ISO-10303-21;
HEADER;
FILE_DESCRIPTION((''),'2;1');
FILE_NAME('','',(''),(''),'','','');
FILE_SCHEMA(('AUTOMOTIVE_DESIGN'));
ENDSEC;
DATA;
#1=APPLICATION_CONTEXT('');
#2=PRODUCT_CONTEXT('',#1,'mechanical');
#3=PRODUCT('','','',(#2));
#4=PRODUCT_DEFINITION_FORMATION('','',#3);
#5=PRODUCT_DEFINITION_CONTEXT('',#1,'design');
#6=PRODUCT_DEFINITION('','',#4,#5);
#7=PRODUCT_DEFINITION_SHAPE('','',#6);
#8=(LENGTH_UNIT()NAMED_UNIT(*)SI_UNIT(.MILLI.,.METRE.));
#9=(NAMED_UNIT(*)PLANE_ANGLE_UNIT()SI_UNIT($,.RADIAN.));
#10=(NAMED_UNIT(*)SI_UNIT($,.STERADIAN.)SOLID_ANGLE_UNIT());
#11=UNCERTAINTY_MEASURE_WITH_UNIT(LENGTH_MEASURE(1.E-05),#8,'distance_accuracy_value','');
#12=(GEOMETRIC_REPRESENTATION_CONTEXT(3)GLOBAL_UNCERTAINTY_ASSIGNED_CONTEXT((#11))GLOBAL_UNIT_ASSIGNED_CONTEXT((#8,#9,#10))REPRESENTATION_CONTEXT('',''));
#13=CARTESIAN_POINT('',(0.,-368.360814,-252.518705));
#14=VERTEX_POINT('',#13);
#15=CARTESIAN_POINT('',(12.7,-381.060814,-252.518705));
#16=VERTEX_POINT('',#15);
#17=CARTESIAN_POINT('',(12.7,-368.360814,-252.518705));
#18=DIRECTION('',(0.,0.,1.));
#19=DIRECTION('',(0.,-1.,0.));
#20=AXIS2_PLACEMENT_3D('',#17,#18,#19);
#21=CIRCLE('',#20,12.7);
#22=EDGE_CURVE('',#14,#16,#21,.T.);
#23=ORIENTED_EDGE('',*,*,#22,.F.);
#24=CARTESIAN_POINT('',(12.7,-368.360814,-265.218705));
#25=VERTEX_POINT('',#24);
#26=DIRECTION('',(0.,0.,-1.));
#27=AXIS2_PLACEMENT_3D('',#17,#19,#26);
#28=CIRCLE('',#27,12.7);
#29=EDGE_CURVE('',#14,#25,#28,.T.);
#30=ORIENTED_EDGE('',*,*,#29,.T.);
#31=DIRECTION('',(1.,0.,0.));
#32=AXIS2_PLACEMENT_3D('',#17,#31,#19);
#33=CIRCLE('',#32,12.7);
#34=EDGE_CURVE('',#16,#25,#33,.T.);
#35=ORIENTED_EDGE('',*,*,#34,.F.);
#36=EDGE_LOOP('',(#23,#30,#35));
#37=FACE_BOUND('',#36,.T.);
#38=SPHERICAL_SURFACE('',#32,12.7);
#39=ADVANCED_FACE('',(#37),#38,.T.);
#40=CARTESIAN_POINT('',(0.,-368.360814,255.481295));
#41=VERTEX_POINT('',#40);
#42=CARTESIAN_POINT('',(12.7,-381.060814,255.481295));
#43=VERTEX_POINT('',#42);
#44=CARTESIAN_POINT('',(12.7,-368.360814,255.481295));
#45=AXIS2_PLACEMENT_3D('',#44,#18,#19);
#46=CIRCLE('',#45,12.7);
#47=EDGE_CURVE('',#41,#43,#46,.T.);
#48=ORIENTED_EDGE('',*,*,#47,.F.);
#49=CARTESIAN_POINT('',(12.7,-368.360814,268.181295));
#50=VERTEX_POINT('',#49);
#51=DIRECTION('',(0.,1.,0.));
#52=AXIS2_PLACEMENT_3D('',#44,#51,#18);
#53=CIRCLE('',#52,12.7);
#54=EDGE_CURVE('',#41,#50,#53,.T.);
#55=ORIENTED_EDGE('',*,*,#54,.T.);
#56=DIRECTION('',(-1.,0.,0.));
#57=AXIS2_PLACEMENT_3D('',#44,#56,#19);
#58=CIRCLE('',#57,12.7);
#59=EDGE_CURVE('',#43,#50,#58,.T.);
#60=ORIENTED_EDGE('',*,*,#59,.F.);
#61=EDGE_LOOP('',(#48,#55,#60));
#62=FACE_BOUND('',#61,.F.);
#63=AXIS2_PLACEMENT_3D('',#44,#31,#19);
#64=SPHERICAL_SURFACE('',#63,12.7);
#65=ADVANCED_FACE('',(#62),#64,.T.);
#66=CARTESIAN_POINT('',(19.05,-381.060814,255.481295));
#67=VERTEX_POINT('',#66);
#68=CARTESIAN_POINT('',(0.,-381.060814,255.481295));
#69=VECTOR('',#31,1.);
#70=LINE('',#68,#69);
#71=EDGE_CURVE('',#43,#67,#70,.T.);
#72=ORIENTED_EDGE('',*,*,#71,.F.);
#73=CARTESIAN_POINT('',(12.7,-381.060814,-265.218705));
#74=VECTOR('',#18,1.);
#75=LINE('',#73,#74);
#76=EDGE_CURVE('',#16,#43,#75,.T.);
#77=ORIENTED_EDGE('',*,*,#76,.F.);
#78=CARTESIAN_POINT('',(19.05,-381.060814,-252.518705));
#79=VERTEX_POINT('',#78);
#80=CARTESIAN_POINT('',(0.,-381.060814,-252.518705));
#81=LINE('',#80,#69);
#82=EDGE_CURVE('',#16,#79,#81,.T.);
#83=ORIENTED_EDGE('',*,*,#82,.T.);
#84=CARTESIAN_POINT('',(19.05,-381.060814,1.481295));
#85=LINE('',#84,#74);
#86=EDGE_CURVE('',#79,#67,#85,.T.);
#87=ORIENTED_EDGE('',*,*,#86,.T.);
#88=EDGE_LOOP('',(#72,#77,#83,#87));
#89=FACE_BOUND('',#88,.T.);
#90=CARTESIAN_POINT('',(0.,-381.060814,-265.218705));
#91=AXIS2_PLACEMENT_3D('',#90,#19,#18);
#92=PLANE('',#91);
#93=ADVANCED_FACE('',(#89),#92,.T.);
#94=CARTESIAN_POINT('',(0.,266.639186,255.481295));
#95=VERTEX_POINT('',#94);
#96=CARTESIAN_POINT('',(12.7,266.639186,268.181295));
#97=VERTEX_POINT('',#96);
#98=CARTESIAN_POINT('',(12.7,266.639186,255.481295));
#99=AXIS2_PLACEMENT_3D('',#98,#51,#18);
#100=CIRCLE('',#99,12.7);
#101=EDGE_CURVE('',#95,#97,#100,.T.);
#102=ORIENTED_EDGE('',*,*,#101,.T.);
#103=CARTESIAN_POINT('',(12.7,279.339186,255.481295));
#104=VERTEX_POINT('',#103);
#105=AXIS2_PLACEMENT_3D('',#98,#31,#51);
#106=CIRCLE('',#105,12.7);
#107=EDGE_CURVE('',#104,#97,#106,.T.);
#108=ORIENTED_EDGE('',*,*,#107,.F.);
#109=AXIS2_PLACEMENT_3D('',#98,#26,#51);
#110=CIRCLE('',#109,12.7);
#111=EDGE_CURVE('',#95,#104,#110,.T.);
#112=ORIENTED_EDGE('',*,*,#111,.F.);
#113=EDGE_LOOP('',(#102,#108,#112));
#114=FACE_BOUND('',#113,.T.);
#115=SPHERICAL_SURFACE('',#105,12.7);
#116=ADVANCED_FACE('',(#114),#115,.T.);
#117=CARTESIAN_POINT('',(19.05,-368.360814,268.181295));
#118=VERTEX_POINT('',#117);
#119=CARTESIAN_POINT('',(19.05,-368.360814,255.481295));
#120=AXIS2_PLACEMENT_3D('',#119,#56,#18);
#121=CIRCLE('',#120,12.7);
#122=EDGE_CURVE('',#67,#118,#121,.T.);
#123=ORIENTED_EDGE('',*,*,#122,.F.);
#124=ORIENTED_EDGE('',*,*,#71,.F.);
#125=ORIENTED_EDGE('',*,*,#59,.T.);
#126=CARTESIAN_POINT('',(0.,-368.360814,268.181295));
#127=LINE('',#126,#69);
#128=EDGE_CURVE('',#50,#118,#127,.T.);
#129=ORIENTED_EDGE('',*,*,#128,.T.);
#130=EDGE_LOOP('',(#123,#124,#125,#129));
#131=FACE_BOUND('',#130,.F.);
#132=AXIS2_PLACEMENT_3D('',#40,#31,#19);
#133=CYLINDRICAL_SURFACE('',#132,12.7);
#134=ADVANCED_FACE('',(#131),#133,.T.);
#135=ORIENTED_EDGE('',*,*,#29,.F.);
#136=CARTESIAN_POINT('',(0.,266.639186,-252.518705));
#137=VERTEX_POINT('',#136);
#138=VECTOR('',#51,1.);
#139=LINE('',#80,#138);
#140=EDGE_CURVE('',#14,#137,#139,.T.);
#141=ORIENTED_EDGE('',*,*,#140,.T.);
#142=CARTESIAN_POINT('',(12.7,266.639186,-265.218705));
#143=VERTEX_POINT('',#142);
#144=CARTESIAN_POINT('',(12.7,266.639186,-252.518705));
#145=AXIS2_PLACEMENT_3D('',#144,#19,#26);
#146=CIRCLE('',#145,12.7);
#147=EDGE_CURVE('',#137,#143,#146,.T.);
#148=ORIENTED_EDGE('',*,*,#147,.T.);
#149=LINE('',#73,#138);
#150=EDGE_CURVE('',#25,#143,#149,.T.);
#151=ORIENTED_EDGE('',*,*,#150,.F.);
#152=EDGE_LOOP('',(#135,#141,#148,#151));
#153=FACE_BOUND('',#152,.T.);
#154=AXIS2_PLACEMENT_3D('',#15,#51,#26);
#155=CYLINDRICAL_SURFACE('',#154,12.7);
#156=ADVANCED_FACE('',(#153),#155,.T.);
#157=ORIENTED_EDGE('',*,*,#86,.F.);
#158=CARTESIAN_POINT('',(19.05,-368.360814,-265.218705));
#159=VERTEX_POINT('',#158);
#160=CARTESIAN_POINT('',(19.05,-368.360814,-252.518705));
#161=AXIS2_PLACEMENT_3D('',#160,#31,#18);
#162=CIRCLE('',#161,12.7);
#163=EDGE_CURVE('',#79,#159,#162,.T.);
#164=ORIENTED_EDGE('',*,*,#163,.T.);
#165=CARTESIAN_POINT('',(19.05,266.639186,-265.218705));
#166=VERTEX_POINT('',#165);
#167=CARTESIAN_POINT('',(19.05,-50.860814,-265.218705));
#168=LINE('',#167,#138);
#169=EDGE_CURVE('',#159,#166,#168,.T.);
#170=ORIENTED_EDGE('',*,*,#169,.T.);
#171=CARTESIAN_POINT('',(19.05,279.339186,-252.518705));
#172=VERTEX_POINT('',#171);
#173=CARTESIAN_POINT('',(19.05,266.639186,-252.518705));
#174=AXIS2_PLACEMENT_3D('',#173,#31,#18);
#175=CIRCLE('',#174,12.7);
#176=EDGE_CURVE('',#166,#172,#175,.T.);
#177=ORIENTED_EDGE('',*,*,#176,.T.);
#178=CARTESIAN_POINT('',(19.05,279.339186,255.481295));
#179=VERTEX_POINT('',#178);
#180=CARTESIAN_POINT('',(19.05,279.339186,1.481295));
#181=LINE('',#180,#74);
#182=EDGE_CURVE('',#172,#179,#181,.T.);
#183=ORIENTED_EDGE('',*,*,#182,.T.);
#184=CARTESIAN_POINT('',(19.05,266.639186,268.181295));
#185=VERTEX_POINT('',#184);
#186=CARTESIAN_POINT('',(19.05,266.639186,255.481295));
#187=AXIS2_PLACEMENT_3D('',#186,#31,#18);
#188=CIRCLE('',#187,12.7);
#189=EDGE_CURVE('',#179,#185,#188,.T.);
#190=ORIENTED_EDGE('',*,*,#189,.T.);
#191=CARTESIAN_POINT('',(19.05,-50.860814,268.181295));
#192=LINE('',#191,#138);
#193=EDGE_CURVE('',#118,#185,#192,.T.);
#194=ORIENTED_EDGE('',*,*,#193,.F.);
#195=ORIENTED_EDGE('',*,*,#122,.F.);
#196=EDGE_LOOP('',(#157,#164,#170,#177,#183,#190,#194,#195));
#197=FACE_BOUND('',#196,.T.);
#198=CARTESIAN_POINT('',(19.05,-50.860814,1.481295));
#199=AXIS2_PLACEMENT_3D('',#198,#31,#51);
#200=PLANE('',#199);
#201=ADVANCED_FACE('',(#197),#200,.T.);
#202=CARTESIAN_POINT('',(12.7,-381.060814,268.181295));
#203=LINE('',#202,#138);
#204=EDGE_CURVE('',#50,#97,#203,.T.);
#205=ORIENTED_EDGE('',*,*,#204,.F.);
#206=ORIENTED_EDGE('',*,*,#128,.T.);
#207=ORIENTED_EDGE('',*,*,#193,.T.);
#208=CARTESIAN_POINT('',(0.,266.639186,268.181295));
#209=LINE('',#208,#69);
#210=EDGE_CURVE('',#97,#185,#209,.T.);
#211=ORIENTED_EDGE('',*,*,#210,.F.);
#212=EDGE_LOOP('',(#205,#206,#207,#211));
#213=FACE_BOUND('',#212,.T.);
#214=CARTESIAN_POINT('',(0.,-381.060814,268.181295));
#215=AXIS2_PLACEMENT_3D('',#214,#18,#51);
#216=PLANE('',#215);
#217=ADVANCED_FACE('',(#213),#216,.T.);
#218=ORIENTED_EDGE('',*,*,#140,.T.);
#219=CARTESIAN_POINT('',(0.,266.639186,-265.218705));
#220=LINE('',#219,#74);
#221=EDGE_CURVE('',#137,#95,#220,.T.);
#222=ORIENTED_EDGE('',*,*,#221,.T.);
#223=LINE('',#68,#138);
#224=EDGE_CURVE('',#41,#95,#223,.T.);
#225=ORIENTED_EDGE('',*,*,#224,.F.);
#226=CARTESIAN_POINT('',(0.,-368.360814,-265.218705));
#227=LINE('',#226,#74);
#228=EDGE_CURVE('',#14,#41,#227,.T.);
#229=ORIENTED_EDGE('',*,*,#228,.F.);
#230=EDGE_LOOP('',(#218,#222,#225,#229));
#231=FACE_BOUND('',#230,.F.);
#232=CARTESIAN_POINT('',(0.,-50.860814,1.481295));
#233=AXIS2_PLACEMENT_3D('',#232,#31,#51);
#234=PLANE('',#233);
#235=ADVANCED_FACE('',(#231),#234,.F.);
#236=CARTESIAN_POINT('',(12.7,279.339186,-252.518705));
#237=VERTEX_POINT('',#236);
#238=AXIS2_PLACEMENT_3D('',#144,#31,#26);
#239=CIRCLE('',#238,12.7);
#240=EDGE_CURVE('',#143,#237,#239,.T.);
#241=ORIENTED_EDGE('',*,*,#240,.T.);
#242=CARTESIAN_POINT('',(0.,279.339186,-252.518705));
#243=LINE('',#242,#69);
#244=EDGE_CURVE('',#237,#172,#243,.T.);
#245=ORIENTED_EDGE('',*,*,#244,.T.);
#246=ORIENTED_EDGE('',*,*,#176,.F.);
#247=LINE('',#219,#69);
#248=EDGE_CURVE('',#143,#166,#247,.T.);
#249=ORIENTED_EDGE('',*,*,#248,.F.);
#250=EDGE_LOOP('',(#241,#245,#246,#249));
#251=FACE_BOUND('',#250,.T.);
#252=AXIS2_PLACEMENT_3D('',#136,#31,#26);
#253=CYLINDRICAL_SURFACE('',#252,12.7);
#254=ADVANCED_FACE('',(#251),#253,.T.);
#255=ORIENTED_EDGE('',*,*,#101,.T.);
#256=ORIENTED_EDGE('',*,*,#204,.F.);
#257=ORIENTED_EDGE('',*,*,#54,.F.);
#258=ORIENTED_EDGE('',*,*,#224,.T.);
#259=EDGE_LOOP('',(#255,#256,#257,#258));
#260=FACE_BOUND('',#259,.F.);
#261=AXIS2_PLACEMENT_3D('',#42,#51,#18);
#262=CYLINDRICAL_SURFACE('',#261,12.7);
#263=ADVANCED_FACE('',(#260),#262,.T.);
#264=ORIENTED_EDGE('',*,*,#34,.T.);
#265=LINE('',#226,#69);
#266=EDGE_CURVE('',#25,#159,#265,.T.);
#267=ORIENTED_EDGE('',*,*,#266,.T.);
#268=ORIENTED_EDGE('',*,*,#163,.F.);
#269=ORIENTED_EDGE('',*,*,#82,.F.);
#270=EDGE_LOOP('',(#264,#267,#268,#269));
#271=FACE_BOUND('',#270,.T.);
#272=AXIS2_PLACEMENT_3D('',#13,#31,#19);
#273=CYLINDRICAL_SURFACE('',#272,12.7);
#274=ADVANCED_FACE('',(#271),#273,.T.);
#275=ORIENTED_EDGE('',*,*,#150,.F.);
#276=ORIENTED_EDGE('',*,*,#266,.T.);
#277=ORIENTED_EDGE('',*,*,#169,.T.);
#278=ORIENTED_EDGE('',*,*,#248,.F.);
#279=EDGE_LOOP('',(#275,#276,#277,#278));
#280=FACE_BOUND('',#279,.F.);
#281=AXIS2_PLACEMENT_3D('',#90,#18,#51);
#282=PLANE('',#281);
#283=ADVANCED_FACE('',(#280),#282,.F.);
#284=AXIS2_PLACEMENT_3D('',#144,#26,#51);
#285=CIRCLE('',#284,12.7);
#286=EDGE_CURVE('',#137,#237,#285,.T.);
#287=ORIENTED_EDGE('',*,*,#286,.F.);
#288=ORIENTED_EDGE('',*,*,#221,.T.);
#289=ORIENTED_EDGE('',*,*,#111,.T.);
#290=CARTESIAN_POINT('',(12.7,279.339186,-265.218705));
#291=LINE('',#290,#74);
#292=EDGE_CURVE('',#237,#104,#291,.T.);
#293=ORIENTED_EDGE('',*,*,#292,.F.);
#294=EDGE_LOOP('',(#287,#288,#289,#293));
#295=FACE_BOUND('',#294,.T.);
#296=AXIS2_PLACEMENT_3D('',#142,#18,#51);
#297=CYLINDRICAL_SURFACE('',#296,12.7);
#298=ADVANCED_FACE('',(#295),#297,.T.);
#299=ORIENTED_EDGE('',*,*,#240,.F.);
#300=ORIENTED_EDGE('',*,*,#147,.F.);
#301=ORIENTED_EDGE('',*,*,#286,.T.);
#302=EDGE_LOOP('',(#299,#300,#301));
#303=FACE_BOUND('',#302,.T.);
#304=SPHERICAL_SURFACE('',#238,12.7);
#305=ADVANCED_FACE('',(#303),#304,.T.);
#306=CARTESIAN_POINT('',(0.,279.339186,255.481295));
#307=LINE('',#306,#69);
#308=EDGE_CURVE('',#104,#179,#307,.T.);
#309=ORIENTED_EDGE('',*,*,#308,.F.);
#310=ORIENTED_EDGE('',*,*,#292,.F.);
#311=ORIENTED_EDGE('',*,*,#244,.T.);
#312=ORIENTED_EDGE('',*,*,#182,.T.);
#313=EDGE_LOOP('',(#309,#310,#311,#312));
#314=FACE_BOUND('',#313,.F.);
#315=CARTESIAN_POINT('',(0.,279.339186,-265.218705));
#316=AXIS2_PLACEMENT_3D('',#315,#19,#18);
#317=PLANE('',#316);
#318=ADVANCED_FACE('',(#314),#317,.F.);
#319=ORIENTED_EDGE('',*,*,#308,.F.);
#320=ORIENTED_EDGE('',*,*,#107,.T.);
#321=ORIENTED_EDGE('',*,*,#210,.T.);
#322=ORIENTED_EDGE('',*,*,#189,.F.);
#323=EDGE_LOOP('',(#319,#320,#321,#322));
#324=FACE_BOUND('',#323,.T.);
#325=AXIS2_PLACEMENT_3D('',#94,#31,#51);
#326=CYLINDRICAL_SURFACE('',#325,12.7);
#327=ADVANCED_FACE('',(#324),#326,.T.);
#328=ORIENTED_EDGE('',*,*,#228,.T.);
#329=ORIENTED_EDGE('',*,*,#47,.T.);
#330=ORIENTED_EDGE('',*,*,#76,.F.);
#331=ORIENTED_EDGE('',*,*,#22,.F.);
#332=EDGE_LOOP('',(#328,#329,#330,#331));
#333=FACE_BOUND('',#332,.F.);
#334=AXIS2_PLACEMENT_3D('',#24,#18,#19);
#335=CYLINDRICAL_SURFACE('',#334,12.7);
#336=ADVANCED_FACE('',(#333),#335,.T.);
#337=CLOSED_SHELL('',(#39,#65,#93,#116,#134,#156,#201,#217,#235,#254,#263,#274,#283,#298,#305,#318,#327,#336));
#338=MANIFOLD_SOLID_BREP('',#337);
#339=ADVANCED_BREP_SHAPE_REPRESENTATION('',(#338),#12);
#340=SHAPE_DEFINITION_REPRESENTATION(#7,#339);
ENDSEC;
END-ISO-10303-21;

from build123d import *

# Parameters (mm, degrees)
F0_W     = 660.4
F0_H     = 533.4
F1_DEPTH = 19.05
F3_R     = 12.7


# Not quite as in the source:
# - two fillets or chamfers of one size are made in one step
# - a feature of the source that left no trace in its solid (it failed there, or was rolled back) is left out


with BuildPart() as f1:
    # F0 (on Right) → F1 (new body)
    with BuildSketch(Plane.YZ):
        with Locations((-50.8608140139, 1.481294632)):
            Rectangle(F0_W, F0_H)
    extrude(amount=F1_DEPTH)

    # F3
    f3_edges = [f1.edges().sort_by_distance(p)[0] for p in [
        (9.525, -381.060814, 268.181295),
        (9.525, -381.060814, -265.218705),
        (0, -381.060814, 1.481295),
        (9.525, 279.339186, -265.218705),
        (0, -50.860814, -265.218705),
        (9.525, 279.339186, 268.181295),
        (0, 279.339186, 1.481295),
        (0, -50.860814, 268.181295),
    ]]
    fillet(f3_edges, radius=F3_R)


solid = f1.part
